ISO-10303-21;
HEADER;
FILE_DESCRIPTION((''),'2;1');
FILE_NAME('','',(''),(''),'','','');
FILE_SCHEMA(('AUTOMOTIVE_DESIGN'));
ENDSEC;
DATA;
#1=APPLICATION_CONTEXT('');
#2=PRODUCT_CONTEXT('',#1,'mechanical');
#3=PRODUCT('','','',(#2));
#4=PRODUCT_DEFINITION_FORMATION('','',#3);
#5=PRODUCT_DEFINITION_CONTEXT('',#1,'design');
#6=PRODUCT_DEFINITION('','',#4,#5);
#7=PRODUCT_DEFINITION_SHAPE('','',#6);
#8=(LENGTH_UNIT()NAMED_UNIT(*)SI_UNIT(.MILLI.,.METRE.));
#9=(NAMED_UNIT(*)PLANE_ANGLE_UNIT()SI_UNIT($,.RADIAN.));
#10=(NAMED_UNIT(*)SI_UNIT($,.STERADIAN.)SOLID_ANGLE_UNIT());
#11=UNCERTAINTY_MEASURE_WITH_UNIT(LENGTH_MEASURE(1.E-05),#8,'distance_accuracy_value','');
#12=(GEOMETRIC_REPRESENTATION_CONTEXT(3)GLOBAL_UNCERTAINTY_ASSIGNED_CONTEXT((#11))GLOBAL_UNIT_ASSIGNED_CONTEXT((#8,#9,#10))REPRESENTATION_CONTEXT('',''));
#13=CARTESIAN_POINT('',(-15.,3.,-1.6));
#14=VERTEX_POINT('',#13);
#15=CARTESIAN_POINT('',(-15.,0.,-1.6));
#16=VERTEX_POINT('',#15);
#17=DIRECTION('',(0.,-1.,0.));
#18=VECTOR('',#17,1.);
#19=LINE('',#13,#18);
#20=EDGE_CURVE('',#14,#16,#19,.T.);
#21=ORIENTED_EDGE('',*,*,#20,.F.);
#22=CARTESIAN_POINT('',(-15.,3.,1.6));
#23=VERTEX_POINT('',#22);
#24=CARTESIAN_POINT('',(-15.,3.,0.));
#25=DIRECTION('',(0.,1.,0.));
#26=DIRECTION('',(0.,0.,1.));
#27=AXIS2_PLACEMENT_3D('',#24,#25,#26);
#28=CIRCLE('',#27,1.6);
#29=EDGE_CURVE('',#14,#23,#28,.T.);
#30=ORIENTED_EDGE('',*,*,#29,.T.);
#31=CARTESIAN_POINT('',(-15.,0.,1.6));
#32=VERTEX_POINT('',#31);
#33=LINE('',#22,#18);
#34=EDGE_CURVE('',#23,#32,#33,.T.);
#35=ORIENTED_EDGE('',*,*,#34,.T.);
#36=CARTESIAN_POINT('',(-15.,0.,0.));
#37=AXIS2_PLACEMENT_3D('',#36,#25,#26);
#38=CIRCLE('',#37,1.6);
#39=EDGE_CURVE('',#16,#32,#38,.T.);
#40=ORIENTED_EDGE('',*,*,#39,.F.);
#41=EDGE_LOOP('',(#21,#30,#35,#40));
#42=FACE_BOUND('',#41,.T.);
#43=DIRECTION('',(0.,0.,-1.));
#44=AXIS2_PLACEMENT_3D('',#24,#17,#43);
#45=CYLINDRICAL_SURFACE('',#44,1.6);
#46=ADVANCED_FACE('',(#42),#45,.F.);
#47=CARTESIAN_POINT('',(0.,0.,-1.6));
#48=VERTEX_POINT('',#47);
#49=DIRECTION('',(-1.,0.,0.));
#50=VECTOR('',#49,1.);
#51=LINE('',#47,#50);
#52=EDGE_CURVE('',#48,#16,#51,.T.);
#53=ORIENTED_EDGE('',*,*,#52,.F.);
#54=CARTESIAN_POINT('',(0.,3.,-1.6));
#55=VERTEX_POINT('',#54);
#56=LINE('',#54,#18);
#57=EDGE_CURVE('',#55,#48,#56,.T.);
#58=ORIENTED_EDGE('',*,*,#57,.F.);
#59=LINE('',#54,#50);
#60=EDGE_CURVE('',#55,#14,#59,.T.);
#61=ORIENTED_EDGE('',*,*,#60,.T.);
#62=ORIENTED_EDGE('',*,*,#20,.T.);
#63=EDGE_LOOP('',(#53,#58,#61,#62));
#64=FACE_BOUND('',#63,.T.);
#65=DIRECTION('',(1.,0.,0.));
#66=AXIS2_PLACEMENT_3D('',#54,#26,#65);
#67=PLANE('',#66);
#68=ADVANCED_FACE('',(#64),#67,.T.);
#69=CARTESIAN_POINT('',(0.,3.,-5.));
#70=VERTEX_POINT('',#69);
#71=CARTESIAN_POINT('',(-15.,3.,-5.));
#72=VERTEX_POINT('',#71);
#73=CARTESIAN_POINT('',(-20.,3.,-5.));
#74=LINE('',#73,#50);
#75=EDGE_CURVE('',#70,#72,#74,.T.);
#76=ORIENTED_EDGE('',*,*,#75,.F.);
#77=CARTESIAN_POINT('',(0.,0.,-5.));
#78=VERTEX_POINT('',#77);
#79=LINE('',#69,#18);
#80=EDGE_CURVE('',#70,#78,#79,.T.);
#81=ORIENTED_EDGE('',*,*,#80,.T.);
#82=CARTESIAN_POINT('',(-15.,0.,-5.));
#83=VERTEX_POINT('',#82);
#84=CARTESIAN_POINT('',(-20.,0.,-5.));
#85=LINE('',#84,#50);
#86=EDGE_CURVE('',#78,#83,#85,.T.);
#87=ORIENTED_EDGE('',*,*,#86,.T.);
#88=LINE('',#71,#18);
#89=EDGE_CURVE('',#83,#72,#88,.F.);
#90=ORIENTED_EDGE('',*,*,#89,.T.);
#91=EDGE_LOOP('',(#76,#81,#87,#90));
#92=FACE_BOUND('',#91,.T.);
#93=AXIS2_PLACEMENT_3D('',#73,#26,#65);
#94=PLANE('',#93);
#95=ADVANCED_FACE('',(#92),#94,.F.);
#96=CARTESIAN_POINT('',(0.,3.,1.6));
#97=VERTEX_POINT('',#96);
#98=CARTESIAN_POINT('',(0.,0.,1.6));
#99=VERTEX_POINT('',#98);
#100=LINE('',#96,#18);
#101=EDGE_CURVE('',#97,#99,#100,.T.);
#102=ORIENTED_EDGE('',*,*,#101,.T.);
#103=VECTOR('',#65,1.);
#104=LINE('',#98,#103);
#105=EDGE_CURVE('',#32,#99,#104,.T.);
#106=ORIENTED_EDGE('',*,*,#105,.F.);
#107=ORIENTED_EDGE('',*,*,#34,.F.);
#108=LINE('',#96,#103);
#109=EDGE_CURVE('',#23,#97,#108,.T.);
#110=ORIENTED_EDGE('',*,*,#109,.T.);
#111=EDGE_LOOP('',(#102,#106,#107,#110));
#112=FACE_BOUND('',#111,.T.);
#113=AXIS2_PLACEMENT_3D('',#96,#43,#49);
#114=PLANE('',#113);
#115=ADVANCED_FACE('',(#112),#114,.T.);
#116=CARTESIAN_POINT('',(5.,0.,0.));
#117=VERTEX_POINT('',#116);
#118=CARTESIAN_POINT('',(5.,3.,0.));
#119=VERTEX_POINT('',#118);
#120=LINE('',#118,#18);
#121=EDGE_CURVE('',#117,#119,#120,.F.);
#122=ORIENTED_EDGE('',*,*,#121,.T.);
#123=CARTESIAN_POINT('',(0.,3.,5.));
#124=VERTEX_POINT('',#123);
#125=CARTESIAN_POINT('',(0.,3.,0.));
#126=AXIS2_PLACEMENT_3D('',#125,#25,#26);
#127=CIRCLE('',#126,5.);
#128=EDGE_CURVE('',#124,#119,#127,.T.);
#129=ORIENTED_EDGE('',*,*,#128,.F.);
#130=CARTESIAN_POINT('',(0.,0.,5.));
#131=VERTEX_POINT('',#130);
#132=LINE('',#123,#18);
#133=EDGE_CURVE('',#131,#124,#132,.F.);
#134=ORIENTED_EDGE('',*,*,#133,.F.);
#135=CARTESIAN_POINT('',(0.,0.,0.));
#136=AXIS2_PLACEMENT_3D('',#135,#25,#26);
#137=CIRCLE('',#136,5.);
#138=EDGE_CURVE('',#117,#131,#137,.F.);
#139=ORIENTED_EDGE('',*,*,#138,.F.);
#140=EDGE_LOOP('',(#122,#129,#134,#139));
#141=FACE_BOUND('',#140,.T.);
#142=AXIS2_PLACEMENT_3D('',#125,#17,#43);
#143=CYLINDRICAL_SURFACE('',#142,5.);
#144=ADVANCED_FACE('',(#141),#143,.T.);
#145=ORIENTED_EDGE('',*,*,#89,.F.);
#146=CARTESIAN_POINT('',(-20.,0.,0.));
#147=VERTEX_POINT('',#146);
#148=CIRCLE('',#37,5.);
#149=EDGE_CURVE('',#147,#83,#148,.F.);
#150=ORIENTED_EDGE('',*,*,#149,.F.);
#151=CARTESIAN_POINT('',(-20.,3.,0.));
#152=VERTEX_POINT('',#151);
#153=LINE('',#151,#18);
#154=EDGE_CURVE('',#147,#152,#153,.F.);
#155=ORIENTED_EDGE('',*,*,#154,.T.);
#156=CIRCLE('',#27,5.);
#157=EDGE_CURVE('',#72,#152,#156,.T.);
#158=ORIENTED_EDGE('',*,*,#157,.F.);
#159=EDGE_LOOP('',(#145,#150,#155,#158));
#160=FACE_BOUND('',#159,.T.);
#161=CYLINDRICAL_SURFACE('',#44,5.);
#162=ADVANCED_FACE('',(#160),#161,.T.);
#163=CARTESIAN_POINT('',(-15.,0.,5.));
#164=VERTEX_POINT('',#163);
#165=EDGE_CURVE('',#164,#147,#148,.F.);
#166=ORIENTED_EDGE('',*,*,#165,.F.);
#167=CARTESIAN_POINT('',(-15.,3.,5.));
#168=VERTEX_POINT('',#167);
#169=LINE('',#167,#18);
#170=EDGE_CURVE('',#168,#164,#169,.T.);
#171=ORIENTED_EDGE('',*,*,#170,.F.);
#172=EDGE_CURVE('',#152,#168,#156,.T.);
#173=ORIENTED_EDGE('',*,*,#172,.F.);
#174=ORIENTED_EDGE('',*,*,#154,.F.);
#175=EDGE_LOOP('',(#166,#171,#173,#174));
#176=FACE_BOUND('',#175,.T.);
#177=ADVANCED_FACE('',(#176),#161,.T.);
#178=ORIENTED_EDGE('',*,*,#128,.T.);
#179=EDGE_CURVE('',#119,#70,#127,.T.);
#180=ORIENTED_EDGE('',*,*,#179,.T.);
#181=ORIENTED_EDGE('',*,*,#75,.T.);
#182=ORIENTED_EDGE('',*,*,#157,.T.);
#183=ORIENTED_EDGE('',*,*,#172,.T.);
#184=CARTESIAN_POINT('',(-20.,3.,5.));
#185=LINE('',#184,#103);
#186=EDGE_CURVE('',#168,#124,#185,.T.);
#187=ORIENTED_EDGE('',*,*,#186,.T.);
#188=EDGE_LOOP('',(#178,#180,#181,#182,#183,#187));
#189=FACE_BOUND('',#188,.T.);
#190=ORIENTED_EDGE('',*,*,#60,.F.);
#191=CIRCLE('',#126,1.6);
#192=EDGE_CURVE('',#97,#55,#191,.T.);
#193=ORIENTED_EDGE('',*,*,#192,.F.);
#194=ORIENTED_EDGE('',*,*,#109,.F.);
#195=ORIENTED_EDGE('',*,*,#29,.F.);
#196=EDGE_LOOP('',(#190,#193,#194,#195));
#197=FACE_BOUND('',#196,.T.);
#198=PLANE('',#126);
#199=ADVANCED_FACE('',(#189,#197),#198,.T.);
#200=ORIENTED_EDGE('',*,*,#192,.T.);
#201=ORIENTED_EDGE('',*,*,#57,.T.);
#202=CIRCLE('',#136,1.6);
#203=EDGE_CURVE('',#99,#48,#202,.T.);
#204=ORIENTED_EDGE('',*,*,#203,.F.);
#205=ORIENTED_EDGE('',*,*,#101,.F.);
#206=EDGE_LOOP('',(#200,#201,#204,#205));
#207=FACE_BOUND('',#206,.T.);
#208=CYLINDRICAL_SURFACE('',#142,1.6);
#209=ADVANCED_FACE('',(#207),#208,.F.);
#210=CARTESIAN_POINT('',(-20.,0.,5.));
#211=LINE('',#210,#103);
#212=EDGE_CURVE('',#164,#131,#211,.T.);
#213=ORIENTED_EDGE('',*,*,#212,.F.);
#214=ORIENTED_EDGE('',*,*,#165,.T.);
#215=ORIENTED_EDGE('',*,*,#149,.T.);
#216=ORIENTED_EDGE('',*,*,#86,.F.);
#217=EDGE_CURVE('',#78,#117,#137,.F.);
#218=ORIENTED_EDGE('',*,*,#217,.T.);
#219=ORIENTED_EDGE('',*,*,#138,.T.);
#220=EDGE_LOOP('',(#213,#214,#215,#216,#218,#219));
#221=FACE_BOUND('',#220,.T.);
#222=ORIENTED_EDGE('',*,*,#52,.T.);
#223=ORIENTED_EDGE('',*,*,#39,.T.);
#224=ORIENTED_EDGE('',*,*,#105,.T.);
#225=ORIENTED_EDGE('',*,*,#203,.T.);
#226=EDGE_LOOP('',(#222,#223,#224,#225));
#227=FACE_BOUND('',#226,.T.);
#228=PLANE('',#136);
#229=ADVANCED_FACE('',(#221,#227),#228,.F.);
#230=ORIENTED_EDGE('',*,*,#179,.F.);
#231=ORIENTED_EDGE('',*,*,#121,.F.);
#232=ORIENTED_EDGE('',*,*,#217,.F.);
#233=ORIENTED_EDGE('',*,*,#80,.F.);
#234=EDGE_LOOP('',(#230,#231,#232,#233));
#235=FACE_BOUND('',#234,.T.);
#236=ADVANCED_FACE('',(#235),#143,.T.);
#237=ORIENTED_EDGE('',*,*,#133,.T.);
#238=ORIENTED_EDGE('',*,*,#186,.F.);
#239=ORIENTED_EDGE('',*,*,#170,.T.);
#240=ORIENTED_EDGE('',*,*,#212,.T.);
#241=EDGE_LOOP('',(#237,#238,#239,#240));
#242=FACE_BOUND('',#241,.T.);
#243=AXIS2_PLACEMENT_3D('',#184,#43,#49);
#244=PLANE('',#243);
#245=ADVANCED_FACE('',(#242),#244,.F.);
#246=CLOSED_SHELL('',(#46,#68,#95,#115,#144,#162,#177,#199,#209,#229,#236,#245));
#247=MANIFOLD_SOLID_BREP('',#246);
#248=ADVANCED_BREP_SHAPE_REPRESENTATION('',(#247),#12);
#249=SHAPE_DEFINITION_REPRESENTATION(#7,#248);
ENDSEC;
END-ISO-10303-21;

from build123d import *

# Parameters (mm, degrees)
SKETCH_1_W      = 25
SKETCH_1_H      = 10
EXTRUDE_1_DEPTH = 3
FILLET_1_R      = 5


with BuildPart() as part:
    # 草图1 → 凸台-拉伸1 (new body)
    with BuildSketch(Plane(origin=(0, 0, 0), x_dir=(1, 0, 0), z_dir=(0, 1, 0))):
        with Locations((-7.5, 0)):
            Rectangle(SKETCH_1_W, SKETCH_1_H)
        with BuildLine():
            Line((0, -1.6), (-15, -1.6))
            ThreePointArc((-15, -1.6), (-16.6, 0), (-15, 1.6))
            Line((-15, 1.6), (0, 1.6))
            ThreePointArc((0, 1.6), (1.6, 0), (0, -1.6))
        make_face(mode=Mode.SUBTRACT)
    extrude(amount=EXTRUDE_1_DEPTH)

    # 圆角1
    fillet_1_edges = [part.edges().sort_by_distance(p)[0] for p in [
        (5, 1.5, 5),
        (5, 1.5, -5),
        (-20, 1.5, -5),
        (-20, 1.5, 5),
    ]]
    fillet(fillet_1_edges, radius=FILLET_1_R - 0.0001)  # a hair under: the kernel refuses the full size


solid = part.part
